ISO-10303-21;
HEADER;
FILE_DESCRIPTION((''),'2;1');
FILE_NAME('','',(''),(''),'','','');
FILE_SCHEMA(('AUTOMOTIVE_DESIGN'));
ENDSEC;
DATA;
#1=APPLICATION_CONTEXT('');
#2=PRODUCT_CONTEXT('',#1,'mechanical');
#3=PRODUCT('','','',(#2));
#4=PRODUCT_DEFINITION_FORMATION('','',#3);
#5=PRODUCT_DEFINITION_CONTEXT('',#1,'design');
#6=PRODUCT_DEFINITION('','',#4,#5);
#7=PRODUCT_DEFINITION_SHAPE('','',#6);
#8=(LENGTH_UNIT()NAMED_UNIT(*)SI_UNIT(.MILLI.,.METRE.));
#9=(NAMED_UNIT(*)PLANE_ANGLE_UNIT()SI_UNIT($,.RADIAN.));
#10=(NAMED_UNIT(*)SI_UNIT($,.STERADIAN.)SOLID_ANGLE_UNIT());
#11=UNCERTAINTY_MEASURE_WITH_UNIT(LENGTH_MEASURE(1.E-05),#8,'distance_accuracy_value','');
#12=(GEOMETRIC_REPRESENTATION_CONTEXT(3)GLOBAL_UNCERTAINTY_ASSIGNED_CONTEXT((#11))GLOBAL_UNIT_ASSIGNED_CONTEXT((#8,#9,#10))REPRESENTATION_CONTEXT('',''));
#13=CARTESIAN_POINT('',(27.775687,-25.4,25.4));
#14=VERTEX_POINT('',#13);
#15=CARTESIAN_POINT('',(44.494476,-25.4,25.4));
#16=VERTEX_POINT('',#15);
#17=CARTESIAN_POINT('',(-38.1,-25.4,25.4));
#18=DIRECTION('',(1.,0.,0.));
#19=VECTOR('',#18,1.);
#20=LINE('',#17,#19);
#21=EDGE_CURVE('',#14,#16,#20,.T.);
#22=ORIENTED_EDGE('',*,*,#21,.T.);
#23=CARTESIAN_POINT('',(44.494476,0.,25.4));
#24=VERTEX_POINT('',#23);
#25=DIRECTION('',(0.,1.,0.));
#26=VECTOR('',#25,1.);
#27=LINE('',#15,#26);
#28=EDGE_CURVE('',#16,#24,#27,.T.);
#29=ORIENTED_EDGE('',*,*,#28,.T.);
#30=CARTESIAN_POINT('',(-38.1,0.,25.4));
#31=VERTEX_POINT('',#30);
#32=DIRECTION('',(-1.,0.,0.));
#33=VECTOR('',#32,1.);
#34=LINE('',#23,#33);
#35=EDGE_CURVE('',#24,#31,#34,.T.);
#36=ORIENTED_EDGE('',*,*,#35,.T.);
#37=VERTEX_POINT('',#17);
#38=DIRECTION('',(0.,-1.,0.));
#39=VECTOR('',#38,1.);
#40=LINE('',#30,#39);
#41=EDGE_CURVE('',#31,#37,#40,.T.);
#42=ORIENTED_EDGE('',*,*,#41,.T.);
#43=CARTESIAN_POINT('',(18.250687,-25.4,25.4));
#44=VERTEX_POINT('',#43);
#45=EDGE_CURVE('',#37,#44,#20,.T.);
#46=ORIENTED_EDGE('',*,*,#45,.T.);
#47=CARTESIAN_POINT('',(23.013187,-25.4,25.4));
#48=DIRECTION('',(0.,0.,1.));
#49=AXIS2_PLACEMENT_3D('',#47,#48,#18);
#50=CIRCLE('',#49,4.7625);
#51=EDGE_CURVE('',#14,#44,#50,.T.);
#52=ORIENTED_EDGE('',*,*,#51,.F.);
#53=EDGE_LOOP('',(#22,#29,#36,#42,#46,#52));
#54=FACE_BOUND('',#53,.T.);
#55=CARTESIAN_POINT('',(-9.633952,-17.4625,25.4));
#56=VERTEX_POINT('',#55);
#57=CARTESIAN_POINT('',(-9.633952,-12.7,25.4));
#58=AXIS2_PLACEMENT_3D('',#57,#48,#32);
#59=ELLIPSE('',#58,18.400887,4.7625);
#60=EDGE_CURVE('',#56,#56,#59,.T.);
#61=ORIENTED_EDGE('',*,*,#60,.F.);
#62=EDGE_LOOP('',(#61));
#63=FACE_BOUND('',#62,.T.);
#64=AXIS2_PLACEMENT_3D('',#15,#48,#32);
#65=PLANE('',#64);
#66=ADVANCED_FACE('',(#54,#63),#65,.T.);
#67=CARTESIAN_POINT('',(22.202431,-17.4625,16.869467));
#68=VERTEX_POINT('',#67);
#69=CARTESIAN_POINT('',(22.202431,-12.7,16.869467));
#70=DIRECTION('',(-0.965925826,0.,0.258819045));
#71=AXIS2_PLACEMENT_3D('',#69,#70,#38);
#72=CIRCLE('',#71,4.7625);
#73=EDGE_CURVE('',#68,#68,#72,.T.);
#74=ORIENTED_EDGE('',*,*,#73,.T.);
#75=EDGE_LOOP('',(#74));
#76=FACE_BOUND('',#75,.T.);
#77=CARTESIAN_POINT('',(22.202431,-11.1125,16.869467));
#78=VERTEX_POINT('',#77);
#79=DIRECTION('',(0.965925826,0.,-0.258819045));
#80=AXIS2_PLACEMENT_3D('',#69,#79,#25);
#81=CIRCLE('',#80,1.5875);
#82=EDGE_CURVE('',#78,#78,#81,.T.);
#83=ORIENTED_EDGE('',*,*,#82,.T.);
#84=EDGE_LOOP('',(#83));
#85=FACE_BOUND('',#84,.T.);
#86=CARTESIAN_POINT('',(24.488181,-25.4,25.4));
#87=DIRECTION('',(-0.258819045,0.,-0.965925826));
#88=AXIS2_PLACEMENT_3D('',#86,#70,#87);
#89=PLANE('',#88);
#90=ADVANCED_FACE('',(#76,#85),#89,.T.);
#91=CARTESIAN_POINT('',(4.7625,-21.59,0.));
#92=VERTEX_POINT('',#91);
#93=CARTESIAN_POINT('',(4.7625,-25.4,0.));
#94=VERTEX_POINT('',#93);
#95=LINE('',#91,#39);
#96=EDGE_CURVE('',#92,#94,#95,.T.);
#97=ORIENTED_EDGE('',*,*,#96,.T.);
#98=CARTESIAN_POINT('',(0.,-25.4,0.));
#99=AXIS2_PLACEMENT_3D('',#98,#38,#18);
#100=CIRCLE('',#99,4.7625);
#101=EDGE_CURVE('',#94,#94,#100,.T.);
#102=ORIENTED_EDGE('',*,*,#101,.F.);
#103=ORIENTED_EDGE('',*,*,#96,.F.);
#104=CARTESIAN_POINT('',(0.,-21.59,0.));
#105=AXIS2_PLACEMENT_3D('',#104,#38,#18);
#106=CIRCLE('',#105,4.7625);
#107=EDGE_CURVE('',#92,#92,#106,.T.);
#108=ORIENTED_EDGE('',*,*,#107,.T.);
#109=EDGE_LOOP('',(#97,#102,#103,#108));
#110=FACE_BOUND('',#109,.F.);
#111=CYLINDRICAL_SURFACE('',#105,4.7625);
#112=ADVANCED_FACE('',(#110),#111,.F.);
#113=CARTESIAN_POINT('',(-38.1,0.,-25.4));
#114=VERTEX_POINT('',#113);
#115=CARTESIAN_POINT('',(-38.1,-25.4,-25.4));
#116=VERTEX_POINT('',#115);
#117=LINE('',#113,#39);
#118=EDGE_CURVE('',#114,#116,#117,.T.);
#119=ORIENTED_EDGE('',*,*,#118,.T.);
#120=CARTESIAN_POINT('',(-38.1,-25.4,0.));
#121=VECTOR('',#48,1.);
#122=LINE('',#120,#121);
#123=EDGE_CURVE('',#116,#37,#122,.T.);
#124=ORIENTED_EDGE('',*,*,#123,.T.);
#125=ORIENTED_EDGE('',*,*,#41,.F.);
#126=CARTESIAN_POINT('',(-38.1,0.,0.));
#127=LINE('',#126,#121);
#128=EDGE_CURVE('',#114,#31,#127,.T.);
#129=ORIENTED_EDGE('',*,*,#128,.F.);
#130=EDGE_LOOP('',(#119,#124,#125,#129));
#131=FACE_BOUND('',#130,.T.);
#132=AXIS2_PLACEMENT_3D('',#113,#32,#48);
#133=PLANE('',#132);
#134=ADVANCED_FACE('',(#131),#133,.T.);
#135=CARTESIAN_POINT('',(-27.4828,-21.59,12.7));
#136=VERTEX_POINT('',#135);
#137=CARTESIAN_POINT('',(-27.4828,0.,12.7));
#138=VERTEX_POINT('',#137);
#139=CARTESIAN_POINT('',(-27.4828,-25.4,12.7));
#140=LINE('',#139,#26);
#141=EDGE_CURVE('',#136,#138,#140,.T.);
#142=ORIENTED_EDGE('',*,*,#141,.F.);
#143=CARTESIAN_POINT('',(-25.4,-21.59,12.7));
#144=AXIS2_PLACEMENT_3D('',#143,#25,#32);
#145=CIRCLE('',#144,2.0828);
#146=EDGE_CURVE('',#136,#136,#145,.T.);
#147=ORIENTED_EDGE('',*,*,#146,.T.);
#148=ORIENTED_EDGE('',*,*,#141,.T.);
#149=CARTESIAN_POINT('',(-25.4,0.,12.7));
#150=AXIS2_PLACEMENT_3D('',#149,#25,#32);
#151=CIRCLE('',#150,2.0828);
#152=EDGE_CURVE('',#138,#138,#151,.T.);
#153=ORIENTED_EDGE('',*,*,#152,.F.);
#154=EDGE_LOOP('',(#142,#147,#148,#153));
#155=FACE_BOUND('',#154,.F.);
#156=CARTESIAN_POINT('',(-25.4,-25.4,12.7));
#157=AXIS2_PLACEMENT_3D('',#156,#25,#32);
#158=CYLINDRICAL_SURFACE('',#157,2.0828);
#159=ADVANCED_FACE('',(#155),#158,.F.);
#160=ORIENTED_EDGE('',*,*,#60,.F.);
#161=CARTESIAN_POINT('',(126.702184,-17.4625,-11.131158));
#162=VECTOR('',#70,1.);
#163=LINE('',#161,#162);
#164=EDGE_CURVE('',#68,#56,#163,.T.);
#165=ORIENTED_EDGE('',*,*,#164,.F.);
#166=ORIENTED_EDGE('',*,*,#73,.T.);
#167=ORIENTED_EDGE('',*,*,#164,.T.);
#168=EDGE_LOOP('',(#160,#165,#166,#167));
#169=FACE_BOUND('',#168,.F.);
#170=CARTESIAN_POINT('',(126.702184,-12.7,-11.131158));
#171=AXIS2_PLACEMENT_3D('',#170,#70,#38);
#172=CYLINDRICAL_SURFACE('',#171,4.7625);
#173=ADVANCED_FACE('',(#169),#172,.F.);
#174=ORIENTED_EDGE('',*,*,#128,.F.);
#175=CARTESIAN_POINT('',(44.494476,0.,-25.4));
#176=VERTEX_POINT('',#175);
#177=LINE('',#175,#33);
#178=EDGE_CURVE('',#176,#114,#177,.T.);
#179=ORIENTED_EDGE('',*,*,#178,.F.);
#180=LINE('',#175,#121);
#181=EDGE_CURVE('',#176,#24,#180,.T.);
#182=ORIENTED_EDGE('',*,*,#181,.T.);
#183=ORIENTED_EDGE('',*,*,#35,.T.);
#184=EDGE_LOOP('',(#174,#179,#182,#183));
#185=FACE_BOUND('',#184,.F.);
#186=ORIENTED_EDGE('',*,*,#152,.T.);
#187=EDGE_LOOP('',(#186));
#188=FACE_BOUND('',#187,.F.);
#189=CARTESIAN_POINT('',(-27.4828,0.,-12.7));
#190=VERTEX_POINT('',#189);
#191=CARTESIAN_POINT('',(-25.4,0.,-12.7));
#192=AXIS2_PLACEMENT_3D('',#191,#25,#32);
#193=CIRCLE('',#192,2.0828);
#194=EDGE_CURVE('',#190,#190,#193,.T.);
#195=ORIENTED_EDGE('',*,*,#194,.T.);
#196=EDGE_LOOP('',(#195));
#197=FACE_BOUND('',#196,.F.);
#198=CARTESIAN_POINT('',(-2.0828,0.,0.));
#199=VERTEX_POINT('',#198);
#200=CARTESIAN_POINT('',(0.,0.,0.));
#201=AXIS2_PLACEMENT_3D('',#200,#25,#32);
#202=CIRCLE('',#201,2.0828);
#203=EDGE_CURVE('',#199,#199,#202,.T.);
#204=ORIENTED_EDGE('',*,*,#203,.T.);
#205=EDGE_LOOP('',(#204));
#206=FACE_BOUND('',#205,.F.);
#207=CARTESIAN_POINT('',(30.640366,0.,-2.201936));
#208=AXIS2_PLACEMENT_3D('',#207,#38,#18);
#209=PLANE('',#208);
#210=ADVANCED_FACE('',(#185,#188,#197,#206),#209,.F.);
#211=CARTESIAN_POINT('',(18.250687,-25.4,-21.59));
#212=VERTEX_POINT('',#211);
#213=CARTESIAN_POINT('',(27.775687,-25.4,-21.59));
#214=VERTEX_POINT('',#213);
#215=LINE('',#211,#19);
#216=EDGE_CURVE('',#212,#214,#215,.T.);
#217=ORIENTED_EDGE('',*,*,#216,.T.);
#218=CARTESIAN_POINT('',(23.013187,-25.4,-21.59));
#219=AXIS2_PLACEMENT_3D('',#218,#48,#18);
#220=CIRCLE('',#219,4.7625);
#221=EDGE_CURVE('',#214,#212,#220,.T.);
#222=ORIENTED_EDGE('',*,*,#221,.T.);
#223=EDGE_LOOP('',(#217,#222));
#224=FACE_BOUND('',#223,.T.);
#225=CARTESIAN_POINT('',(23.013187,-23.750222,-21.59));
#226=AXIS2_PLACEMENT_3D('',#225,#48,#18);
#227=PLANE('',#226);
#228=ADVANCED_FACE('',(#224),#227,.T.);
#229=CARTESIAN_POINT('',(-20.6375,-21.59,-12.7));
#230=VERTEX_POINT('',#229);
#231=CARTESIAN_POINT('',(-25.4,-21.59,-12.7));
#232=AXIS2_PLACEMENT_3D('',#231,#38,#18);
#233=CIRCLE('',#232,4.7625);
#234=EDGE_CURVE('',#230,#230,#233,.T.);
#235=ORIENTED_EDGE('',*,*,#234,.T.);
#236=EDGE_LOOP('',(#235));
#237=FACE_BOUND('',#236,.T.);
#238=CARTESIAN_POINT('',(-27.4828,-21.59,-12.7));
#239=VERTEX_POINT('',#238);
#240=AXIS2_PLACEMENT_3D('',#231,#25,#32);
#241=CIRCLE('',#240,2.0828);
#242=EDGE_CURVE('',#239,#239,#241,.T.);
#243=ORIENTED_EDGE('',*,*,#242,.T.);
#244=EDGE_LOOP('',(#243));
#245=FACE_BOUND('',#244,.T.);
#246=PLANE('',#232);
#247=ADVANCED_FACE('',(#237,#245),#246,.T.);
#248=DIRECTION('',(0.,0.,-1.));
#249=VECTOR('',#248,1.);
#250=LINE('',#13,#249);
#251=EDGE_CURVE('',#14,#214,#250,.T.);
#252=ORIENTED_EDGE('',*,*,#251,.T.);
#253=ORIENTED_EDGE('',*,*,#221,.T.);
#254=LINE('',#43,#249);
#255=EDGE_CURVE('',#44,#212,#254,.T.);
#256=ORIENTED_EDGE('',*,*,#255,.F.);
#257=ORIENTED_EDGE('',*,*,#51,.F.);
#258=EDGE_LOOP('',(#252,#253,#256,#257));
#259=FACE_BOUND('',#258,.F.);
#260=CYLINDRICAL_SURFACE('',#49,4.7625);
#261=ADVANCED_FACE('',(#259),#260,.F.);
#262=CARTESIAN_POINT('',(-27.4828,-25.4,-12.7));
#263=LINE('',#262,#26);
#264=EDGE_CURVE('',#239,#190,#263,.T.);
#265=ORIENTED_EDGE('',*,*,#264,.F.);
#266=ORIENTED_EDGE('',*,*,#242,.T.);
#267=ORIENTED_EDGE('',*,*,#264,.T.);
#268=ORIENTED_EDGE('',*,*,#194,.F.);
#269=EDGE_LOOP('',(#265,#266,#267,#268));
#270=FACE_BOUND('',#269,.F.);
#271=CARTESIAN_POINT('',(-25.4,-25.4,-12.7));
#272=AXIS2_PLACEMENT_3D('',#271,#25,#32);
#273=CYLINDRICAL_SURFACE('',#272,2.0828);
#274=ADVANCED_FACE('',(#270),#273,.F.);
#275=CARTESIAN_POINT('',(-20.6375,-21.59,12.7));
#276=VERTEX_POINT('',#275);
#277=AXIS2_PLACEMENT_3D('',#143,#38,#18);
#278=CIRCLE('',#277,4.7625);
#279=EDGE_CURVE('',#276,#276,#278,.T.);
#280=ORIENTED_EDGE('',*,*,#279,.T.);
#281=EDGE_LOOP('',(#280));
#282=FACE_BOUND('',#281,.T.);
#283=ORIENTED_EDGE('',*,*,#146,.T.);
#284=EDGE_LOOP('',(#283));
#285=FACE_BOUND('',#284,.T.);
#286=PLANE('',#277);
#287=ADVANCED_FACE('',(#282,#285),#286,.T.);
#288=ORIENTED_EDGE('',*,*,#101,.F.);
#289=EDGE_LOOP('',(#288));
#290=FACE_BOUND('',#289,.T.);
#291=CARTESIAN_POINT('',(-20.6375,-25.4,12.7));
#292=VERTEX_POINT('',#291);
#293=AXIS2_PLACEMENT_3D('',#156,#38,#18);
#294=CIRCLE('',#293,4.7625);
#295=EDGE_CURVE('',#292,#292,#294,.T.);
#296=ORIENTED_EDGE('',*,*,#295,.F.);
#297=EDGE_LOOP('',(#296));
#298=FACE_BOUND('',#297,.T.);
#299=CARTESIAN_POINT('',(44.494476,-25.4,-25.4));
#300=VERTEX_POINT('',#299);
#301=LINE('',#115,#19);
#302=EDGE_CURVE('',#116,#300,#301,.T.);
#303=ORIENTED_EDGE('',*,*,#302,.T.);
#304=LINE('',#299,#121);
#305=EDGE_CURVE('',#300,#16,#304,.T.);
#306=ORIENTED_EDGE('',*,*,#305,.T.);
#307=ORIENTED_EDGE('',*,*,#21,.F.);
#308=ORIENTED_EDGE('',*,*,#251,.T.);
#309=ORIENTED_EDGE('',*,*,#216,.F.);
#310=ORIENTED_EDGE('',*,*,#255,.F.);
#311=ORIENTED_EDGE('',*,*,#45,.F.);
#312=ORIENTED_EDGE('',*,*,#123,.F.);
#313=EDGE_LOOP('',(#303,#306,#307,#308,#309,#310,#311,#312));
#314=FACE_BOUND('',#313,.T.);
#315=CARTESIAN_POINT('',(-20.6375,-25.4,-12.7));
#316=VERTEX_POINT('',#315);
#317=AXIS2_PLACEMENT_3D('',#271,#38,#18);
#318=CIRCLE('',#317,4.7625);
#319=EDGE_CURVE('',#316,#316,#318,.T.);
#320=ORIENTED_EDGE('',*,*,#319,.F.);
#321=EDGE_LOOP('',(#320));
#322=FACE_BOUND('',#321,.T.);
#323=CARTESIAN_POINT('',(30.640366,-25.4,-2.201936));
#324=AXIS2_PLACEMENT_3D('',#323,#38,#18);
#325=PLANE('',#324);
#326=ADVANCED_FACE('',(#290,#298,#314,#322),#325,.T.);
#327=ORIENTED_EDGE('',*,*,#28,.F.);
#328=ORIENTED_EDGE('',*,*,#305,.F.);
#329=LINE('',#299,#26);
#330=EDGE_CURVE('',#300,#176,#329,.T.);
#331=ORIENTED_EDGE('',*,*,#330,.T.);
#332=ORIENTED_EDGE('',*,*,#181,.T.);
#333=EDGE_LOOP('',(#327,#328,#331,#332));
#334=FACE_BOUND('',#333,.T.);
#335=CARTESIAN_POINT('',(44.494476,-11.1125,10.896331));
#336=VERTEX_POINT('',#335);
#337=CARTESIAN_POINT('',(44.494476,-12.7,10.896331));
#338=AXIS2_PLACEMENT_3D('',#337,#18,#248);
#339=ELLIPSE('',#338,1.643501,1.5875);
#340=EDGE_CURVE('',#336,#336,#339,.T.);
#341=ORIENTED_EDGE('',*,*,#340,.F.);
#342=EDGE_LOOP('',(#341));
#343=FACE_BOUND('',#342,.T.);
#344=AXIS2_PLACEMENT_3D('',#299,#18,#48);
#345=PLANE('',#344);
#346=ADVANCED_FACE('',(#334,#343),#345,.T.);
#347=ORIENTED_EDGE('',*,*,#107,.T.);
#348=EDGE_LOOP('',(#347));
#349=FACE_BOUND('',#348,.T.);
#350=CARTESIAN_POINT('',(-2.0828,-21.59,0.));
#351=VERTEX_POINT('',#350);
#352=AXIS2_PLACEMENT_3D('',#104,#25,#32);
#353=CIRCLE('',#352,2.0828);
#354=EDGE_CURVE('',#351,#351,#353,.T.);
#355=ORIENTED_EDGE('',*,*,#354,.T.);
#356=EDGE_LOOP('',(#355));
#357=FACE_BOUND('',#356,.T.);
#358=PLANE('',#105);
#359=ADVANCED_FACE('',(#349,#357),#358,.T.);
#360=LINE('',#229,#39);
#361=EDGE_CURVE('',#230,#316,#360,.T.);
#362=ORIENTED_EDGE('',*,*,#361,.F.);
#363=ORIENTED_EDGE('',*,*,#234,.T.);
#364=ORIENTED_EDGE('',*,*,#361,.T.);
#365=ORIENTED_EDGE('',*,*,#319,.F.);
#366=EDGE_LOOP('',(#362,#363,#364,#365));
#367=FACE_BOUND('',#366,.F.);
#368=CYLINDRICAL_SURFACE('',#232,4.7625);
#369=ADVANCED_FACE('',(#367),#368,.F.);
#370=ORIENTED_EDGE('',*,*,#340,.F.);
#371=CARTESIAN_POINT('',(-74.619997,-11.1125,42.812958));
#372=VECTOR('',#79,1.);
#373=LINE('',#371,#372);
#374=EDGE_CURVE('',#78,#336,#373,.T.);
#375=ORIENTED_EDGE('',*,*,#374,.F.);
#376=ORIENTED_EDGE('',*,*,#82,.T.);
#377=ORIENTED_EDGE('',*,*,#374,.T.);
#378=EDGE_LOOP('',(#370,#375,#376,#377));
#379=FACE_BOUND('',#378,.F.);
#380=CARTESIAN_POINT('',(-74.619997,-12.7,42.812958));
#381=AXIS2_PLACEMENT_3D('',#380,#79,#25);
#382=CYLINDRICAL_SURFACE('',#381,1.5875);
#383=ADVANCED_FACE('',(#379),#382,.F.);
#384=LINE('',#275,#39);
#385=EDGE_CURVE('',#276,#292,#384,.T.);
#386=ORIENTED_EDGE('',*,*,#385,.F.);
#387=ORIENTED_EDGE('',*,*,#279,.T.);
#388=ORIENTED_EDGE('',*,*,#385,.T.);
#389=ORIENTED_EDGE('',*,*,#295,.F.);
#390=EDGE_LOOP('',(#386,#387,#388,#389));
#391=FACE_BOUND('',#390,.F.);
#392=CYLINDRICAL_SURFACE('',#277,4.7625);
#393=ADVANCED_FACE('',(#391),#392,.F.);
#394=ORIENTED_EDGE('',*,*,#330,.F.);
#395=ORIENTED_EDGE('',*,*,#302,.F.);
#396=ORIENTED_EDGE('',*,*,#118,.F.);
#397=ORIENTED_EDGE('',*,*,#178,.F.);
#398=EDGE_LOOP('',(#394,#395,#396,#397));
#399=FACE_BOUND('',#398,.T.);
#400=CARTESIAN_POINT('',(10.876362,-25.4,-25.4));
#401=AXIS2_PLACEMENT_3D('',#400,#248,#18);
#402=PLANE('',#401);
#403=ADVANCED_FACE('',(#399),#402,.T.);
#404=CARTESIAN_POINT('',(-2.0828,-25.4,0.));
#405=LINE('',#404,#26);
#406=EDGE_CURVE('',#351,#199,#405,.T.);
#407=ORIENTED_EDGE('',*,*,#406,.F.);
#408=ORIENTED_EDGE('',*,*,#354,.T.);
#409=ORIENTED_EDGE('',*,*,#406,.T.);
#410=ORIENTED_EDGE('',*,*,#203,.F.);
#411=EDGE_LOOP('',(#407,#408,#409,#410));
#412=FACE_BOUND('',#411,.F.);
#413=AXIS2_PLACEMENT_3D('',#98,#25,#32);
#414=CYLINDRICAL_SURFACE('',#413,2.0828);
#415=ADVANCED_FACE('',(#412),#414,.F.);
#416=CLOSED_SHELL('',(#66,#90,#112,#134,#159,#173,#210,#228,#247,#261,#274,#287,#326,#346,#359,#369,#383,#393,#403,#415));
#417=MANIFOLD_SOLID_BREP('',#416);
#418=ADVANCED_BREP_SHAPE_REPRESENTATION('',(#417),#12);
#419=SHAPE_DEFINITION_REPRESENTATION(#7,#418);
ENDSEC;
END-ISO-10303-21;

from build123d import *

# Parameters (mm, degrees)
F0_W            = 76.2
F0_H            = 50.8
F1_DEPTH        = 25.4
F3_DEPTH        = 25.401
F5_D            = 9.525
F7_DEPTH        = 25.401
F9_DEPTH        = 25.401
F11_DEPTH       = 25.4
F13_D           = 3.175
F15_DEPTH       = 46.99
F17_D           = 4.1656
F17_CBORE_D     = 9.525
F17_CBORE_DEPTH = 3.81


with BuildPart() as f1:
    # F0 (on Front) → F1 (new body)
    with BuildSketch(Plane.XZ):
        Rectangle(F0_W, F0_H)
    extrude(amount=F1_DEPTH)

    # F2 (on face) → F3 (cut, through all)
    with BuildSketch(Plane.XZ.offset(25.4)):
        Polygon((38.1, -25.4), (38.1, 25.4), (24.4881810245, -25.4), align=None)
    extrude(amount=-F3_DEPTH, mode=Mode.SUBTRACT)

    # F5 (through all)
    with Locations(Plane(origin=(29.1977839421, 0, -7.8235226281), x_dir=(0, 1, 0), z_dir=(0.9659258263, 0, -0.2588190451))):
        with Locations((-12.7, 22.0410656184)):
            Hole(F5_D / 2)

    # F6 (on face) → F7 (cut, through all)
    with BuildSketch(Plane(origin=(0, 0, 0), x_dir=(-1, 0, 0), z_dir=(0, 1, 0))):
        Polygon((-24.4881810245, 25.4), (-38.1, 25.4), (-24.4881810245, -25.4), align=None)
    extrude(amount=-F7_DEPTH, mode=Mode.SUBTRACT)

    # F8 (on face) → F9 (cut, through all)
    with BuildSketch(Plane.XZ.offset(25.4)):
        Polygon((24.4881810245, -25.4), (24.4881810245, 25.4), (10.876362049, -25.4), align=None)
    extrude(amount=-F9_DEPTH, mode=Mode.SUBTRACT)

    # F10 (on face) → F11 (join)
    with BuildSketch(Plane.XZ.offset(25.4)):
        Polygon((44.4944761693, 25.4), (24.4881810245, 25.4), (10.876362049, -25.4), (44.4944761693, -25.4), align=None)
    extrude(amount=-F11_DEPTH)

    # F13 (through all)
    with Locations(Plane(origin=(16.4977839421, 0, -4.4205678842), x_dir=(0, -1, 0), z_dir=(-0.9659258263, 0, 0.2588190451))):
        with Locations((12.7, 22.0410656184)):
            Hole(F13_D / 2)

    # F14 (on face) → F15 (cut)
    with BuildSketch(Plane.XY.offset(25.4)):
        with BuildLine():
            ThreePointArc((27.7756870478, -25.4), (23.0131870478, -20.6375), (18.2506870478, -25.4))
            Line((18.2506870478, -25.4), (27.7756870478, -25.4))
        make_face()
    extrude(amount=-F15_DEPTH, mode=Mode.SUBTRACT)

    # F17 (through all)
    with Locations(Plane.XZ.offset(25.4)):
        with Locations((-25.4, -12.7), (-25.4, 12.7), (0, 0)):
            CounterBoreHole(F17_D / 2, F17_CBORE_D / 2, F17_CBORE_DEPTH)


solid = f1.part
